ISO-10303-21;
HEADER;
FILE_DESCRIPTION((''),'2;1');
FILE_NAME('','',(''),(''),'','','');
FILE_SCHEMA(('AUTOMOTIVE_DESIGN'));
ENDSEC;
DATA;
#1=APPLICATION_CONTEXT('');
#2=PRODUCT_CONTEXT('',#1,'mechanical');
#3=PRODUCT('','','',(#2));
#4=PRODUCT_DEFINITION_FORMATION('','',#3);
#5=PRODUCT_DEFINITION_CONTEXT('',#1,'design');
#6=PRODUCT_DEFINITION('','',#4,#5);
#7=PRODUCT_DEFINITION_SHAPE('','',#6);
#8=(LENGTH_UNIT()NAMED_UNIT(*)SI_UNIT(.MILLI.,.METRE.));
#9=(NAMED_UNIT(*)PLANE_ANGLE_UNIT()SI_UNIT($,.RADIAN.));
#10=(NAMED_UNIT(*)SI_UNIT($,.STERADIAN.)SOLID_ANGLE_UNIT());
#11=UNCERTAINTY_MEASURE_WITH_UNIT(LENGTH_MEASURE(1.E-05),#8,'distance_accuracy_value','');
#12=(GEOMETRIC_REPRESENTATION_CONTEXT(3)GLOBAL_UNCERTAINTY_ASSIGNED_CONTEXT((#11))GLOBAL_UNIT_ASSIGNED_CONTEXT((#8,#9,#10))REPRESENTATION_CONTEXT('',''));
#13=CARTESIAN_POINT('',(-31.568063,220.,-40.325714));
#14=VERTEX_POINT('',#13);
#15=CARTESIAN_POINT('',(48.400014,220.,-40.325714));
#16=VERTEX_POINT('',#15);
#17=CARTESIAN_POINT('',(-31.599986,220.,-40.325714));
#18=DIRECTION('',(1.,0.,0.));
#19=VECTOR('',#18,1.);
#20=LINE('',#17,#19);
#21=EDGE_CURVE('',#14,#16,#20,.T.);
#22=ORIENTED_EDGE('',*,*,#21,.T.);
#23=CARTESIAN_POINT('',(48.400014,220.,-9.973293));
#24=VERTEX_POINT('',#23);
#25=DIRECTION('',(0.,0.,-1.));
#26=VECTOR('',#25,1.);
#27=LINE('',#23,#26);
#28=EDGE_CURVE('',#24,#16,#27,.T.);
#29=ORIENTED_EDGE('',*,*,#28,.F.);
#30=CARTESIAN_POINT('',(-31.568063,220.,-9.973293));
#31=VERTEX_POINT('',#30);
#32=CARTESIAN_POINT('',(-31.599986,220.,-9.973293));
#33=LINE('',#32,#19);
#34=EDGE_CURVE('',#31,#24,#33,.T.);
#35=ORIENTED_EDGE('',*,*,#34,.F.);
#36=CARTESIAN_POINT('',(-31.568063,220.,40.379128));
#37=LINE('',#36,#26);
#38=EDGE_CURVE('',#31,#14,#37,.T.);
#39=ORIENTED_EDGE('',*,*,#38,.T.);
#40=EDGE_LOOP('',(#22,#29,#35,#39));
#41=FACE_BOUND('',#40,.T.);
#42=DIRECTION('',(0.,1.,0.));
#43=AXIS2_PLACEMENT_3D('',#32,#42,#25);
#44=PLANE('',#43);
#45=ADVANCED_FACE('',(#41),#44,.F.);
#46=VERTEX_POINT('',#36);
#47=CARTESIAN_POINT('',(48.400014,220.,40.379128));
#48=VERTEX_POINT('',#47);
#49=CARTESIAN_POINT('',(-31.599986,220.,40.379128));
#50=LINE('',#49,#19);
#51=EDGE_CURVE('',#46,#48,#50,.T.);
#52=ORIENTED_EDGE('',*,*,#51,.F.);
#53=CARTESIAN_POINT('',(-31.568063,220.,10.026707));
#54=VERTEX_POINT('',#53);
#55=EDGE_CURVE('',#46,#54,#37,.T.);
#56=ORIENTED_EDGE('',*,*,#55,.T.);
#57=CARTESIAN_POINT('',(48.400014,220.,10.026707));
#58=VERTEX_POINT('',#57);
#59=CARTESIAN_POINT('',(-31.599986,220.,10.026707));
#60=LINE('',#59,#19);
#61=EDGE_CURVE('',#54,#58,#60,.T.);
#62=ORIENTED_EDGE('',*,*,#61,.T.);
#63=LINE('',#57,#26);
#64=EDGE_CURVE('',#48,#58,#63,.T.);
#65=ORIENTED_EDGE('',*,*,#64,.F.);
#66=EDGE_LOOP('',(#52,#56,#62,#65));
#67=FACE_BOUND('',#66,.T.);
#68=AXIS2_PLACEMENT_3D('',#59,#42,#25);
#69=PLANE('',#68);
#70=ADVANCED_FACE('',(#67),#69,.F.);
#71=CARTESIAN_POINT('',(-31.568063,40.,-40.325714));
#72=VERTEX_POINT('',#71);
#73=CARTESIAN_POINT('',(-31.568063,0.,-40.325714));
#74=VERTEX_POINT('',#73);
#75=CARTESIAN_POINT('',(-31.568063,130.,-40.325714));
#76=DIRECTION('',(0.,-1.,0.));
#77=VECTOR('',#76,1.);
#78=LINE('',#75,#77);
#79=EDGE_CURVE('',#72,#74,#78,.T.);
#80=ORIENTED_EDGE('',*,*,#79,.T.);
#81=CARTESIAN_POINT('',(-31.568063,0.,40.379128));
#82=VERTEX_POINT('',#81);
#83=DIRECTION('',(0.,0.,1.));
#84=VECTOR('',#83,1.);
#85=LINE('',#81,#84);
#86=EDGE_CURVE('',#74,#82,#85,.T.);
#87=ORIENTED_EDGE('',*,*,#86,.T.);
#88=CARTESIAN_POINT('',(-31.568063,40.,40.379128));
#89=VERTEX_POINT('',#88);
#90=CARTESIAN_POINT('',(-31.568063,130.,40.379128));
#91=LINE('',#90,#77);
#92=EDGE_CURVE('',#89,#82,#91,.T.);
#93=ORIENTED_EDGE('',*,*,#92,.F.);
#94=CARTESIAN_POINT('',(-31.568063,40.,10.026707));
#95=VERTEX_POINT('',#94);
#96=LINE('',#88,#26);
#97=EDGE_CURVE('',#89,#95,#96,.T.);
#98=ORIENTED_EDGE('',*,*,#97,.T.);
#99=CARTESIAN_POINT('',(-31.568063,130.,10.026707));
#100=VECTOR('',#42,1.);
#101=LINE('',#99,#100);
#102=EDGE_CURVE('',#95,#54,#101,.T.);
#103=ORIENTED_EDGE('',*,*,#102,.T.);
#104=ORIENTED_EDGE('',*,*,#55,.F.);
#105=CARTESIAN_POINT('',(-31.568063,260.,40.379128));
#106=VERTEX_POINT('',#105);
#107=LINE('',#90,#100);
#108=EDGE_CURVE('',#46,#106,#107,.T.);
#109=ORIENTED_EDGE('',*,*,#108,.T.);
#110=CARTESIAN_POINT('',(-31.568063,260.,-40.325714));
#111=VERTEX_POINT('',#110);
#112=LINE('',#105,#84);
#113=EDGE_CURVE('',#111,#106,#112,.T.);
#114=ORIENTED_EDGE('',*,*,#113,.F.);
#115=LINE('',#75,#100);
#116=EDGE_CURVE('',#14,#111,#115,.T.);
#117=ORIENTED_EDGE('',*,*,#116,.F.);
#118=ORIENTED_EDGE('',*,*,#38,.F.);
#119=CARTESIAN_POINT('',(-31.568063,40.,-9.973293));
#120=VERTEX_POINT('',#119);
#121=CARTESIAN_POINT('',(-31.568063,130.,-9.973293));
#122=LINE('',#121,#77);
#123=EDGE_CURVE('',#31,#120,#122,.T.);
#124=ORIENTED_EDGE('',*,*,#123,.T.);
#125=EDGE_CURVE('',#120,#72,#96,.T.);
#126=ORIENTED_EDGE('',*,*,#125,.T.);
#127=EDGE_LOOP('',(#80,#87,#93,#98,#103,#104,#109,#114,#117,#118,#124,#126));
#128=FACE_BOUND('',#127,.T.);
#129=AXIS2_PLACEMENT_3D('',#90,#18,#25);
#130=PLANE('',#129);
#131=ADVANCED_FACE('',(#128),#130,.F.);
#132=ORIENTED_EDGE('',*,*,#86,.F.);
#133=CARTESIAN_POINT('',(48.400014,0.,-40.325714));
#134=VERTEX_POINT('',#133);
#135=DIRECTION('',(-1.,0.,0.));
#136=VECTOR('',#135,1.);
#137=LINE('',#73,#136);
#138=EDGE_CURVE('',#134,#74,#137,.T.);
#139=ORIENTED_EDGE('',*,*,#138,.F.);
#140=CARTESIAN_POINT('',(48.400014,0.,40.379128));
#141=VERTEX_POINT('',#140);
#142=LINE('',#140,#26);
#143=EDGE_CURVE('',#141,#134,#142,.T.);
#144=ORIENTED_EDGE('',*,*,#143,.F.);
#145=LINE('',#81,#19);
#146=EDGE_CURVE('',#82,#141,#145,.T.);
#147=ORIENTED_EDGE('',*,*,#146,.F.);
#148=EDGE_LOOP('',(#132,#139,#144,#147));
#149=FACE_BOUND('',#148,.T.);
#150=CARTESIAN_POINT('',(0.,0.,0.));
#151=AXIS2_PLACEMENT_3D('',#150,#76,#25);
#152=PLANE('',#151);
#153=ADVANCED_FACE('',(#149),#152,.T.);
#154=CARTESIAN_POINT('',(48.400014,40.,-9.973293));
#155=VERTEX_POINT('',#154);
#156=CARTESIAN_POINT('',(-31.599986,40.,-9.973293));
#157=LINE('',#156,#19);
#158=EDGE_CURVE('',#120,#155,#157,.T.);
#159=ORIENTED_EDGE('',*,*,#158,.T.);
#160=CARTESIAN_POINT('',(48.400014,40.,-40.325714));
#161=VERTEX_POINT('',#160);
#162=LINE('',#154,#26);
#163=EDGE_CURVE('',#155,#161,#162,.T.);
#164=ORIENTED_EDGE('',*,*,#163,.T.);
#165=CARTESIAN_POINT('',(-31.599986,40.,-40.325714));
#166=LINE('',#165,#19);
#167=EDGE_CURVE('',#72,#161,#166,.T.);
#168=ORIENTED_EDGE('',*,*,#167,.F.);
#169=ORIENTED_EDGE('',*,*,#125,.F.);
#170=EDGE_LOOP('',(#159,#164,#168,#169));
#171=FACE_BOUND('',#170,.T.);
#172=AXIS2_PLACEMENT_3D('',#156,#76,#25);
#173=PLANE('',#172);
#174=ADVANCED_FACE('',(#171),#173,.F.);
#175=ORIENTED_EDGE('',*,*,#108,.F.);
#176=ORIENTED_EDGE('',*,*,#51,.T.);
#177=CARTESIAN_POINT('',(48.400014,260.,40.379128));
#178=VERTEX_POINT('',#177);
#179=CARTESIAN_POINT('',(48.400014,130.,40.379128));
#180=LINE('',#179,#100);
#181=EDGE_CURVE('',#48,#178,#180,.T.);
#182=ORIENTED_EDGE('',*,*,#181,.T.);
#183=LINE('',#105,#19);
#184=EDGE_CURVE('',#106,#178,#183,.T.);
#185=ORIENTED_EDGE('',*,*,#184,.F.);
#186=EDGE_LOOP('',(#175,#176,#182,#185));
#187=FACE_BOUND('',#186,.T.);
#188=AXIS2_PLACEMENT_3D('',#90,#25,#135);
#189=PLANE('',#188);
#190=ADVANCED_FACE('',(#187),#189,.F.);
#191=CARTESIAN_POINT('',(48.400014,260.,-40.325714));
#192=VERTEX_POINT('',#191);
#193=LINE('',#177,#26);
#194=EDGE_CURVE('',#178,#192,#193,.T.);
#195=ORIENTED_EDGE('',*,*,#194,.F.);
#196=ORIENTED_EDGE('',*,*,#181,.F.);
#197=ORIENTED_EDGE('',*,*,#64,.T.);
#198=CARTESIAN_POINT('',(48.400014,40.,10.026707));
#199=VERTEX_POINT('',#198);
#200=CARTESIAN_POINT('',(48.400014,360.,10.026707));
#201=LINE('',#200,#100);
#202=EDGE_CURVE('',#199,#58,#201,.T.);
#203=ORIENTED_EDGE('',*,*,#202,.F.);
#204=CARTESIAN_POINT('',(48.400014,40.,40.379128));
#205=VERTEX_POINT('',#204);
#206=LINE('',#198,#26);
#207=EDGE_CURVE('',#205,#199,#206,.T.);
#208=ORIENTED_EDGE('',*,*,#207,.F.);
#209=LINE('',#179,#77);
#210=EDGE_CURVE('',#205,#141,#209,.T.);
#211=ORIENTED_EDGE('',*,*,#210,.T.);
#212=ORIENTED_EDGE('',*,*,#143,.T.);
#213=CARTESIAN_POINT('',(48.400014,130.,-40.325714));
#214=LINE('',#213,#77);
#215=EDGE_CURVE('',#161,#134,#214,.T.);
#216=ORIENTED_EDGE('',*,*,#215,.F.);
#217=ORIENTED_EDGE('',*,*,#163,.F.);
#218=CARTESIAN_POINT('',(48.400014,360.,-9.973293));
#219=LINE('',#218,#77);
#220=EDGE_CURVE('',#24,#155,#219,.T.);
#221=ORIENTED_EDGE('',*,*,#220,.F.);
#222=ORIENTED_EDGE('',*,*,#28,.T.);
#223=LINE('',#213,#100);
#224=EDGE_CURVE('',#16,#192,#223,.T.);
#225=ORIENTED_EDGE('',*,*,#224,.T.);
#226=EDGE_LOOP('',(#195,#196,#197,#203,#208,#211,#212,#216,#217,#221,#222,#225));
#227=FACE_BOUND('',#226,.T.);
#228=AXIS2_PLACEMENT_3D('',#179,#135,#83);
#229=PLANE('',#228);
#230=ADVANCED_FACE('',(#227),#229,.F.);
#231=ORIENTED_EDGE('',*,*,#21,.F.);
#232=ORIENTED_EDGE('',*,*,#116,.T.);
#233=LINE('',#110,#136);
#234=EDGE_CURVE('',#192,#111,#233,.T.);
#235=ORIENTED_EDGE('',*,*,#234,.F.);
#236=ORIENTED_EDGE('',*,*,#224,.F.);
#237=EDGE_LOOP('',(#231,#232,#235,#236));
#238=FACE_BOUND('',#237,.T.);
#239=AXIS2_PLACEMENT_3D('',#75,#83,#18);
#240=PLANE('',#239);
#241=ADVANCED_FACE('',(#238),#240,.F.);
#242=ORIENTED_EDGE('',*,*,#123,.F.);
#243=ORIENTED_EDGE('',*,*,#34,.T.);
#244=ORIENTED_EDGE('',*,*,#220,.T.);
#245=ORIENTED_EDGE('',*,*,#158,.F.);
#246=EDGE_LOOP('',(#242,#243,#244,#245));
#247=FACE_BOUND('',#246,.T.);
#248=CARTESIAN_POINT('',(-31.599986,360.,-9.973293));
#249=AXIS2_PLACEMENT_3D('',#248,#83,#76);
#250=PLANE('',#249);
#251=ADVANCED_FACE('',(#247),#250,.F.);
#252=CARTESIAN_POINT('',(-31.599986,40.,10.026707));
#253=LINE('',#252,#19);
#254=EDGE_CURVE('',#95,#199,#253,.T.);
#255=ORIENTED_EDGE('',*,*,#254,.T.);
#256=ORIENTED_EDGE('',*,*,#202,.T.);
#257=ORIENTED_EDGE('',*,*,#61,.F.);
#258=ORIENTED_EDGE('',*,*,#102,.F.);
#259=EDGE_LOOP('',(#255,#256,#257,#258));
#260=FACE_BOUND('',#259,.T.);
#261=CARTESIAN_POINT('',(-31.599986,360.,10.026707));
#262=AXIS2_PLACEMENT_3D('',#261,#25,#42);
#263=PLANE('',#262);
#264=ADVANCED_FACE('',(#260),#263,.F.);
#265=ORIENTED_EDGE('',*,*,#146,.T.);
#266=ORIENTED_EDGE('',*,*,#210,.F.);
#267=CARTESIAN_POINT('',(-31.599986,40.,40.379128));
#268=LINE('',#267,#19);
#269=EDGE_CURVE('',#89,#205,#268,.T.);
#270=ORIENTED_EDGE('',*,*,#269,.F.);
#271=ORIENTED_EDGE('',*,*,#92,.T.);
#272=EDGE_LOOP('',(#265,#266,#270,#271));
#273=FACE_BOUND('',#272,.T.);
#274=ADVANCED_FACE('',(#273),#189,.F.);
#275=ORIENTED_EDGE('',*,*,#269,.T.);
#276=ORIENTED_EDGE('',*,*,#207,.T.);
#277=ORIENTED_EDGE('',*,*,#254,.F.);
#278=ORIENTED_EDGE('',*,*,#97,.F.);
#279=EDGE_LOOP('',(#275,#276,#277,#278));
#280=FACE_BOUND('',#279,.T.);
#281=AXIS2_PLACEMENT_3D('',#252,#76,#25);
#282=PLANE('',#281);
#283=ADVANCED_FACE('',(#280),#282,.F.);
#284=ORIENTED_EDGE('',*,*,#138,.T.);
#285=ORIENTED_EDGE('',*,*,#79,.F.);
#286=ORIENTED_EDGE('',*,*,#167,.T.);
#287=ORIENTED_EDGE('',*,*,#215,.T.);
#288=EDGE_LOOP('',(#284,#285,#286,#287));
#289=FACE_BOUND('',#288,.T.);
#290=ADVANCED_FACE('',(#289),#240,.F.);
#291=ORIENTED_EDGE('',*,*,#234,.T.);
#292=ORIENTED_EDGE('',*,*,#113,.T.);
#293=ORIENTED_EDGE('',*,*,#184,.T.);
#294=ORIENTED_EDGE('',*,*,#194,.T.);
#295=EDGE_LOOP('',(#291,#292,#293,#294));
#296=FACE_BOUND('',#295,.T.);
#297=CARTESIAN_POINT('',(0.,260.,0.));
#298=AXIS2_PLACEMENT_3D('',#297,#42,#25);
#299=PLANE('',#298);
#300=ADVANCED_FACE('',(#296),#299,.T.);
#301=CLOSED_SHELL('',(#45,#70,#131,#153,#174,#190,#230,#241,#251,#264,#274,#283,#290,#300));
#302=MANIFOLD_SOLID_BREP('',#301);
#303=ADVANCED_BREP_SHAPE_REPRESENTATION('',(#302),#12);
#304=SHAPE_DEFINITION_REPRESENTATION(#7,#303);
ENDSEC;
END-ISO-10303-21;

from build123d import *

# Parameters (mm, degrees)
SKETCH1_W           = 79.968077757
SKETCH1_H           = 80.704842411
BOSS_EXTRUDE1_DEPTH = 130
SKETCH2_W           = 30.352421206
SKETCH2_H           = 320
SKETCH2_W_2         = 30.352421205
CUT_EXTRUDE1_DEPTH  = 80
MIRROR3_START       = -31.568063376
MIRROR3_DEPTH       = 79.968077757


# Read off the part's stored shape, not the designer's step: Mirror3
with BuildPart() as part:
    # Sketch1 → Boss-Extrude1 (new body)
    with BuildSketch(Plane(origin=(0, 0, 0), x_dir=(1, 0, 0), z_dir=(0, 1, 0))):
        with Locations((8.415975503, -0.026706735)):
            Rectangle(SKETCH1_W, SKETCH1_H)
    extrude(amount=BOSS_EXTRUDE1_DEPTH)

    # Sketch2 → Cut-Extrude1 (cut)
    with BuildSketch(Plane(origin=(48.400014381, 0, 0), x_dir=(0, 0, -1), z_dir=(1, 0, 0))):
        with Locations((-25.202917338, 200)):
            Rectangle(SKETCH2_W, SKETCH2_H)
        with Locations((25.149503868, 200)):
            Rectangle(SKETCH2_W_2, SKETCH2_H)
    extrude(amount=-CUT_EXTRUDE1_DEPTH, mode=Mode.SUBTRACT)

    # Mirror3 outline → Mirror3 (add)
    with BuildSketch(Plane.YZ.offset(MIRROR3_START)):
        Polygon((220, -40.32571447), (260, -40.32571447), (260, 40.379127941), (220, 40.379127941), (220, 10.026706735), (130, 10.026706735), (130, -9.973293265), (220, -9.973293265), align=None)
    extrude(amount=MIRROR3_DEPTH)


solid = part.part
